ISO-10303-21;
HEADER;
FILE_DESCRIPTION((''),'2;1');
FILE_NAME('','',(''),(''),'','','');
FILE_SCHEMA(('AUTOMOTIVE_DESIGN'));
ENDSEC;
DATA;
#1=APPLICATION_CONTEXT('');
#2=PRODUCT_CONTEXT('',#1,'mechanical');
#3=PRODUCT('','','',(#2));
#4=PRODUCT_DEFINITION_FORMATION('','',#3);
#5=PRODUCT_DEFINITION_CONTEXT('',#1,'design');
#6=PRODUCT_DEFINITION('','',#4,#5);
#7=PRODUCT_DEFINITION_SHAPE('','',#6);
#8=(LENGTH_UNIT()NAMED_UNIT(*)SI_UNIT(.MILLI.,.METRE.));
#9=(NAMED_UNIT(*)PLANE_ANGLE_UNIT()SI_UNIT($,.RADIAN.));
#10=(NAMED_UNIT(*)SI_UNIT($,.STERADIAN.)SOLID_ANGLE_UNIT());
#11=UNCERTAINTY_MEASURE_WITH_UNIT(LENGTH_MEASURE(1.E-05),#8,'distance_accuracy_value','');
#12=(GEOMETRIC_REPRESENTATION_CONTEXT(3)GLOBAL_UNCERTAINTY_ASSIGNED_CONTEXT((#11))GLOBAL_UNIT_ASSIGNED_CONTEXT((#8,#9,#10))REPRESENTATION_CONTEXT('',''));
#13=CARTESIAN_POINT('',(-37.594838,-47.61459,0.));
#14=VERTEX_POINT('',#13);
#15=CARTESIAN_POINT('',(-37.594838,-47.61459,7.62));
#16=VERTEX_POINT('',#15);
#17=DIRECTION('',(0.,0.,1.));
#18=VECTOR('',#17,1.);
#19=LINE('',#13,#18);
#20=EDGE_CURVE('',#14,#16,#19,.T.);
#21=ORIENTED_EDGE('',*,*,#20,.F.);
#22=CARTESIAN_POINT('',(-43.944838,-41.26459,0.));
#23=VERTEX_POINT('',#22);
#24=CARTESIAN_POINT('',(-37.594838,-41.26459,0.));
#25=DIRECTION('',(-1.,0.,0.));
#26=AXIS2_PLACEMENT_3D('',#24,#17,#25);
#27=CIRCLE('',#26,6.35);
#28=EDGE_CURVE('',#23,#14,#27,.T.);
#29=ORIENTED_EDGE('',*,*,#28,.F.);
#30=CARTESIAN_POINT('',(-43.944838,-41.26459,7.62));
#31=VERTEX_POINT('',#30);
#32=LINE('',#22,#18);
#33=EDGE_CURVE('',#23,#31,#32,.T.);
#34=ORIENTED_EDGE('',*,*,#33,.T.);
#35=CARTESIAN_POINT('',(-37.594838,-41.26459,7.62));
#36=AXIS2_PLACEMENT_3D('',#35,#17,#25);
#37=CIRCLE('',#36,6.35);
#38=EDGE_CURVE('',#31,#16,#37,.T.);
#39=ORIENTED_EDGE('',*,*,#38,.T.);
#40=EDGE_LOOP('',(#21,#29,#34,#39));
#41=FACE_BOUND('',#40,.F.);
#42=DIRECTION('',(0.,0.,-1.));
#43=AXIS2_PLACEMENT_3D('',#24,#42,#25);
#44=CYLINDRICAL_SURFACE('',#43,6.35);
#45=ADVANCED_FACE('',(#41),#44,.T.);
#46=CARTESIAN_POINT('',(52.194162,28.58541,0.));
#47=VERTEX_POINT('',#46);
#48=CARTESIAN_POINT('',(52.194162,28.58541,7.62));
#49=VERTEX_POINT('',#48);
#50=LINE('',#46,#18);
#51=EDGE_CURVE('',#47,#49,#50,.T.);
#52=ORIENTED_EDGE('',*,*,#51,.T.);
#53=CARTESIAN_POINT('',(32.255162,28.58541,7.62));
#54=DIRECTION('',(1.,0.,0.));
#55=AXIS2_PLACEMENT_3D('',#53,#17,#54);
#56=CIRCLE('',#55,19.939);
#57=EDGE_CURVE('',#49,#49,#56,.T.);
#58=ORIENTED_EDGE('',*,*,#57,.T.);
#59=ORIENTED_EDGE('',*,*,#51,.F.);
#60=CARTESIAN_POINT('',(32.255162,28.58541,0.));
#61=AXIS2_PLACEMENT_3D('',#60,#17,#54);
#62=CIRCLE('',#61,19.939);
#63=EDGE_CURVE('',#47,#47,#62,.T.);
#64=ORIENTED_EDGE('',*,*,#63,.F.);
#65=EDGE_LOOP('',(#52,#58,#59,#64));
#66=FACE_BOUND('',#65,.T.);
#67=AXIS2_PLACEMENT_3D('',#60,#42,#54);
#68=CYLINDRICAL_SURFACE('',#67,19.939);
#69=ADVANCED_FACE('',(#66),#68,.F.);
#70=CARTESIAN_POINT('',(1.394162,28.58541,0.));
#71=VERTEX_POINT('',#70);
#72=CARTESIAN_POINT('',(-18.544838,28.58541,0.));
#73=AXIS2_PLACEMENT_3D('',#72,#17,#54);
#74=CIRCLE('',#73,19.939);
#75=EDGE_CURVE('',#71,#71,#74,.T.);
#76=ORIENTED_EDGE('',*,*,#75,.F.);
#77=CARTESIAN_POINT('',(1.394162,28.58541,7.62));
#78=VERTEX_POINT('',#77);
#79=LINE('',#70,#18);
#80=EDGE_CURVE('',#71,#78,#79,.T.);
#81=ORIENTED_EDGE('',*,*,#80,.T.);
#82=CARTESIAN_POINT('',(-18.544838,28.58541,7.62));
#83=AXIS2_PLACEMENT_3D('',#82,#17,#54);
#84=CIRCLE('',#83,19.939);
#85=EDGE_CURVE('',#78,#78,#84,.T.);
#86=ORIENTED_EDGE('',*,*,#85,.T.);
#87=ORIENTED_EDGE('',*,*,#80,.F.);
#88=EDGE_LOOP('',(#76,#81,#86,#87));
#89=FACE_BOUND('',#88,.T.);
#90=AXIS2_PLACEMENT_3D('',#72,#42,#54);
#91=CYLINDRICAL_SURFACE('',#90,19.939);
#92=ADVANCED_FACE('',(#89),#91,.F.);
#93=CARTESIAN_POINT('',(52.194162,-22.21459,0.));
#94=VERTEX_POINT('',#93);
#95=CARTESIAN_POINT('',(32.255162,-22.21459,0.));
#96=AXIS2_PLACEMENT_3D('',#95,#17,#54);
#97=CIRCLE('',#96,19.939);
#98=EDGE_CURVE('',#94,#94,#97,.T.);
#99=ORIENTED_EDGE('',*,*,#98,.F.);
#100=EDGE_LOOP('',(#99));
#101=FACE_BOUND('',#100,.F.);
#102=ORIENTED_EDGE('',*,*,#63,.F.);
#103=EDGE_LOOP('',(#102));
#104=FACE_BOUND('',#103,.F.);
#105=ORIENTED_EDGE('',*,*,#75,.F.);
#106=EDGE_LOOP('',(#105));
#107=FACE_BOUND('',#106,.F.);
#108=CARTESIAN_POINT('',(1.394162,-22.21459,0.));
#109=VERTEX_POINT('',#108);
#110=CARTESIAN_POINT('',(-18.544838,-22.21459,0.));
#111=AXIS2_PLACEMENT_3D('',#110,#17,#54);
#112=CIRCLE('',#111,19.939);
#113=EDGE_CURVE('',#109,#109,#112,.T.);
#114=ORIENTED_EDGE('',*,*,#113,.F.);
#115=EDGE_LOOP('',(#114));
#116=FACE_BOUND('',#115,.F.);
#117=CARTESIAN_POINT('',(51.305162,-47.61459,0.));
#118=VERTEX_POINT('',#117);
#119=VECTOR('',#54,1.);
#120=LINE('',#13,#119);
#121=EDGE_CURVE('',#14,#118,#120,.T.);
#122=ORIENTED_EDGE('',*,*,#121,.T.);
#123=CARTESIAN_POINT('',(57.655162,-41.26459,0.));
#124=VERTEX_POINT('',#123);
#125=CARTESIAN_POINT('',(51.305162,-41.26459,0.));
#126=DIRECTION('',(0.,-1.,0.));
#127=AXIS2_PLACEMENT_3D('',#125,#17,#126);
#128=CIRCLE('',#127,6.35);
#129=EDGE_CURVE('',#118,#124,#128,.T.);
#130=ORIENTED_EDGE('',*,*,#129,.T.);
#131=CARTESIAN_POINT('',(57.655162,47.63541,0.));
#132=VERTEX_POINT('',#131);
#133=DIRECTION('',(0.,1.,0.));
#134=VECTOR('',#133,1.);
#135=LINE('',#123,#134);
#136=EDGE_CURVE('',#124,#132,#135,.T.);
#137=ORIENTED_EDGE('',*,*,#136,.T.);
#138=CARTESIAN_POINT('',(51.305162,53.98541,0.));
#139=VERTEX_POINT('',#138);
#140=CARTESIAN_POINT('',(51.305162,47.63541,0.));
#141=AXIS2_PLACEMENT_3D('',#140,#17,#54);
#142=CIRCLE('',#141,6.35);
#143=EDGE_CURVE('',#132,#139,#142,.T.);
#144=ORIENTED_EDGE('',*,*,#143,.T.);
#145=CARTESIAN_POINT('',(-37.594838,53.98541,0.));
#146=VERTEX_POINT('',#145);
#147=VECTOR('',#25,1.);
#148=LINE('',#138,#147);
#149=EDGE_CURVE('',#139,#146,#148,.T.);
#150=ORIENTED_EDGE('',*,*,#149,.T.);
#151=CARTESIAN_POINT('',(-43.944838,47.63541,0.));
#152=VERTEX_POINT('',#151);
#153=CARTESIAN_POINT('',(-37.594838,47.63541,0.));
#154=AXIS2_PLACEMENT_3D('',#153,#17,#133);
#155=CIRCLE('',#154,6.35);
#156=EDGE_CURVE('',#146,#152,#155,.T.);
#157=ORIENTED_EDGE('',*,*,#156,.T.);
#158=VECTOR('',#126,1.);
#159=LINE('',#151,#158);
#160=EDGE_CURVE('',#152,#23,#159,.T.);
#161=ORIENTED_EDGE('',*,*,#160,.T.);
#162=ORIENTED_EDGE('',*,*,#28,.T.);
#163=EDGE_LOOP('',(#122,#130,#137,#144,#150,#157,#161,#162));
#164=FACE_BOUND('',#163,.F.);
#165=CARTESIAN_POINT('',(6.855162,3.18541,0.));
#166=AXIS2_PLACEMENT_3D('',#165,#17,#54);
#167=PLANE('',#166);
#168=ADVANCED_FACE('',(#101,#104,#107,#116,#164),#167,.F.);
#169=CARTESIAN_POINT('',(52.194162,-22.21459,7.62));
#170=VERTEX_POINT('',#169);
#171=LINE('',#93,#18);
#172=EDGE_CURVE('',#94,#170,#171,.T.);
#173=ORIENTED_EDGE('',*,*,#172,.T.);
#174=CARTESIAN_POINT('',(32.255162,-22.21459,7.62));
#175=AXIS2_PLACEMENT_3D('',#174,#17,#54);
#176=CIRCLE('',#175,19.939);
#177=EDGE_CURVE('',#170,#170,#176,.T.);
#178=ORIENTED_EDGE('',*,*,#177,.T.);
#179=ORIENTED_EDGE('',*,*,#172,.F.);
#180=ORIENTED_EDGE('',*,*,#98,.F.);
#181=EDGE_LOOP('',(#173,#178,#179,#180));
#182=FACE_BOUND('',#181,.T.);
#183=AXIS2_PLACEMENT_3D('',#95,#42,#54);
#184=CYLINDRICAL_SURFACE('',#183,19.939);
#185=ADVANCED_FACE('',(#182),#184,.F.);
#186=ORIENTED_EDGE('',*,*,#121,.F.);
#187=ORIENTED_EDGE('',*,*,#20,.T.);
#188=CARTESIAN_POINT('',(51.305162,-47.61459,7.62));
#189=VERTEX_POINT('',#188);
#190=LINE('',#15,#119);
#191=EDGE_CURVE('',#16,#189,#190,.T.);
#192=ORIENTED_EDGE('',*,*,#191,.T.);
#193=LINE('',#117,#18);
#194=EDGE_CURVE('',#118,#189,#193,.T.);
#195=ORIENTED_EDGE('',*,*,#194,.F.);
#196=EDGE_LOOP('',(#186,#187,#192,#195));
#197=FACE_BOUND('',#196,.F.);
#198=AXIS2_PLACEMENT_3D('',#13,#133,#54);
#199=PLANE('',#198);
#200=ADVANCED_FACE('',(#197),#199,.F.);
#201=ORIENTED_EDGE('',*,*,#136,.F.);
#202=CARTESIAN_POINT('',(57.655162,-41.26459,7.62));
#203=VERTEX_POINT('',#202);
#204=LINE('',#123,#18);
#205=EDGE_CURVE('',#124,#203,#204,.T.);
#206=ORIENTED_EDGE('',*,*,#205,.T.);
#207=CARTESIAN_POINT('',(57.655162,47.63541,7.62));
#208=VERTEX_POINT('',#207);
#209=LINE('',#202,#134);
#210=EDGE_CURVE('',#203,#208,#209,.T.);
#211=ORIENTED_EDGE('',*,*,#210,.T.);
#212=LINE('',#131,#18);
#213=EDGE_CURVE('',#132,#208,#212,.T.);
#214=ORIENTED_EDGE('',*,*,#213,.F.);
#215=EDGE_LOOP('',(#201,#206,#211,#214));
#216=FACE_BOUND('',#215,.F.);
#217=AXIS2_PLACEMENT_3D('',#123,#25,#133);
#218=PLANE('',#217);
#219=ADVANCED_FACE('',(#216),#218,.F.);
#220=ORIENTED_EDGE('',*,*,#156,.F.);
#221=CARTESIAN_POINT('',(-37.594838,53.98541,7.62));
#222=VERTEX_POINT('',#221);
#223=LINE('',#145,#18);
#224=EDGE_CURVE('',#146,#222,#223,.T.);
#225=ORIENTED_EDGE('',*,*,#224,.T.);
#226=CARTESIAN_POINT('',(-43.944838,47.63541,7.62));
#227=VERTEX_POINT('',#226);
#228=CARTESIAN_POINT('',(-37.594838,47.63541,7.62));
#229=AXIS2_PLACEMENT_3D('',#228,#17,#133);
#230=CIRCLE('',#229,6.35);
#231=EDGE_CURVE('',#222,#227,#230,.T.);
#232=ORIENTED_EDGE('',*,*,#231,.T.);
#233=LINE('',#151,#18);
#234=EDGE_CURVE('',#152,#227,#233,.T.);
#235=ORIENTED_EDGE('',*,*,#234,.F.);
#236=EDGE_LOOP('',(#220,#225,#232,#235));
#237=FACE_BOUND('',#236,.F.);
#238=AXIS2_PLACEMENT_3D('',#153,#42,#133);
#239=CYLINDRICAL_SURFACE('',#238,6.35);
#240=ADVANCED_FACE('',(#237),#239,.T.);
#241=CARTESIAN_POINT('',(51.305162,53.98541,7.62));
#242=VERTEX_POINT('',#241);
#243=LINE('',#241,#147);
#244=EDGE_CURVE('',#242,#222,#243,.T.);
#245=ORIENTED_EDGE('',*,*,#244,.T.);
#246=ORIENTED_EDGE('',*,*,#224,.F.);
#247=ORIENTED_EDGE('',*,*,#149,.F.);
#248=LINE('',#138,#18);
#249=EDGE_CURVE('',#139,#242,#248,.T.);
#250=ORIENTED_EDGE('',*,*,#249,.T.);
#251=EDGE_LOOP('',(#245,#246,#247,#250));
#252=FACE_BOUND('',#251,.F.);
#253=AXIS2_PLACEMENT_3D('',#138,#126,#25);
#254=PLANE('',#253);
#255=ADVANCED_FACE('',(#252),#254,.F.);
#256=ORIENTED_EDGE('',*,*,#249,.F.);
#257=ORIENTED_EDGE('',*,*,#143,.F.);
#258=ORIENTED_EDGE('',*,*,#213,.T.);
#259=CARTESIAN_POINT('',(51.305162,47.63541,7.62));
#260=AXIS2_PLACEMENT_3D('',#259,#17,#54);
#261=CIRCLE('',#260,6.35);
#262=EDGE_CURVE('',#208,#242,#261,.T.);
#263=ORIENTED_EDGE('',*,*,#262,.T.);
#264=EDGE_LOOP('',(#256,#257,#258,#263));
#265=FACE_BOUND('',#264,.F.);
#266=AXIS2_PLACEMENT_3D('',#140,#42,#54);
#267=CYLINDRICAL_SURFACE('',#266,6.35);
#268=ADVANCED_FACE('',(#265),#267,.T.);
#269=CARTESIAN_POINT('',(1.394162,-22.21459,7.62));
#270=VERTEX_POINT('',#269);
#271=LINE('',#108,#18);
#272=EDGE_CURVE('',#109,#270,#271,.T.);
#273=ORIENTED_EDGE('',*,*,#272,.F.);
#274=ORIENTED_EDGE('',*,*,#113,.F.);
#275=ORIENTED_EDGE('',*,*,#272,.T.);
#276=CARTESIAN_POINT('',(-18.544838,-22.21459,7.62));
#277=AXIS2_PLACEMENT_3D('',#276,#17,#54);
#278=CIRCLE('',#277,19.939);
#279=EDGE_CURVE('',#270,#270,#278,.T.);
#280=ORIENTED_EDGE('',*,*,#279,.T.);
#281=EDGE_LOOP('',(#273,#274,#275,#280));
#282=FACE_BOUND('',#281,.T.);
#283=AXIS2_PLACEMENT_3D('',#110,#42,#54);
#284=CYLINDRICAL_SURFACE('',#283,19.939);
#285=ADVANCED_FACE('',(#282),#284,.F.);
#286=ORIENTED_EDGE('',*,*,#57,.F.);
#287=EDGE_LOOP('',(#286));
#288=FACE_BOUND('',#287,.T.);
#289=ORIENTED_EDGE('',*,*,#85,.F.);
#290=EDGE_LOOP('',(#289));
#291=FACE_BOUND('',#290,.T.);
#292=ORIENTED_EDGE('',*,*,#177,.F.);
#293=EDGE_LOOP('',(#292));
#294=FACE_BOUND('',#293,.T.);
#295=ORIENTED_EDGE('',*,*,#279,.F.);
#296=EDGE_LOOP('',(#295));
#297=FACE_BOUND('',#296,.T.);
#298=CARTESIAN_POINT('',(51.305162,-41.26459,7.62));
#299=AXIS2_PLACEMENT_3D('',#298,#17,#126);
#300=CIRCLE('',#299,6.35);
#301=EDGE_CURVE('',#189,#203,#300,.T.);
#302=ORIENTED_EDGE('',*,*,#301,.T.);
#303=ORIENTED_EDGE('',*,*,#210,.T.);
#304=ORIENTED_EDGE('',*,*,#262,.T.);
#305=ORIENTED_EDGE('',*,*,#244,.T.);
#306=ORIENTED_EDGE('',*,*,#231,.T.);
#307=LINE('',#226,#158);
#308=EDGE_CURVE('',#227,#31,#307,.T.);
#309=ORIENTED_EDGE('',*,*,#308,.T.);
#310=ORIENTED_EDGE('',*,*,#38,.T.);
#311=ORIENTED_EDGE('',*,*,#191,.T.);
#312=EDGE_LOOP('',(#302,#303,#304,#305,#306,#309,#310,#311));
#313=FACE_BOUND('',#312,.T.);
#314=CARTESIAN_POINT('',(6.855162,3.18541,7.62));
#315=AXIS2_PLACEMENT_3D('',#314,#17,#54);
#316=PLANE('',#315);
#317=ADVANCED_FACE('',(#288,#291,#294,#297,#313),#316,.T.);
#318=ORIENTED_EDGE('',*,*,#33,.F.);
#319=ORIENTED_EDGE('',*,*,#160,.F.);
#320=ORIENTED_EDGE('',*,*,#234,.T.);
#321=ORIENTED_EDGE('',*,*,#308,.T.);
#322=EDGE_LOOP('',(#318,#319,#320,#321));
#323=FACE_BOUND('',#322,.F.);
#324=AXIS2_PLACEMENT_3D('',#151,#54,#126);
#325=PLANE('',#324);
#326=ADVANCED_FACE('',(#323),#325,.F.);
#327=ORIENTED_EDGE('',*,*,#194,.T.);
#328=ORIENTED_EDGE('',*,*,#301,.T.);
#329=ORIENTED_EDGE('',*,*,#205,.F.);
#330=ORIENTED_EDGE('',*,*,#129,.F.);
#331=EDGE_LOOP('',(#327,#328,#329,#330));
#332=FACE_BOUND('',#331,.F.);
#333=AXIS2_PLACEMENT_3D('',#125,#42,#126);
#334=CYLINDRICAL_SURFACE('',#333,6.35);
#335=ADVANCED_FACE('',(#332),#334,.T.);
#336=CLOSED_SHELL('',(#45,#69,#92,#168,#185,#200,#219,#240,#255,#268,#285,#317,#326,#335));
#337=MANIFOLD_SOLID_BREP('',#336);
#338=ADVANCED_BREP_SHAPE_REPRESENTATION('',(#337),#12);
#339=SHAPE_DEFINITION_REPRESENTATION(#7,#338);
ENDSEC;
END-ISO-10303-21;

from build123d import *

# Parameters (mm, degrees)
F0_R     = 19.939
F1_DEPTH = 7.62


# Not quite as in the source:
# - a feature names something its author has since deleted; it is built from what else it names


with BuildPart() as f1:
    # F0 (on Top) → F1 (new body)
    with BuildSketch(Plane.XY):
        with BuildLine():
            ThreePointArc((-43.9448378141, -41.2645899475), (-42.0849658746, -45.754718008), (-37.5948378141, -47.6145899475))
            Line((-37.5948378141, -47.6145899475), (51.3051621859, -47.6145899475))
            ThreePointArc((51.3051621859, -47.6145899475), (55.7952902465, -45.754718008), (57.6551621859, -41.2645899475))
            Line((57.6551621859, -41.2645899475), (57.6551621859, 47.6354100525))
            ThreePointArc((57.6551621859, 47.6354100525), (55.7952902465, 52.1255381131), (51.3051621859, 53.9854100525))
            Line((51.3051621859, 53.9854100525), (-37.5948378141, 53.9854100525))
            ThreePointArc((-37.5948378141, 53.9854100525), (-42.0849658746, 52.1255381131), (-43.9448378141, 47.6354100525))
            Line((-43.9448378141, 47.6354100525), (-43.9448378141, -41.2645899475))
        make_face()
        with Locations((-18.5448378141, -22.2145899475)):
            Circle(F0_R, mode=Mode.SUBTRACT)
        with Locations((32.2551621859, -22.2145899475)):
            Circle(F0_R, mode=Mode.SUBTRACT)
        with Locations((-18.5448378141, 28.5854100525)):
            Circle(F0_R, mode=Mode.SUBTRACT)
        with Locations((32.2551621859, 28.5854100525)):
            Circle(F0_R, mode=Mode.SUBTRACT)
    extrude(amount=F1_DEPTH)


solid = f1.part
